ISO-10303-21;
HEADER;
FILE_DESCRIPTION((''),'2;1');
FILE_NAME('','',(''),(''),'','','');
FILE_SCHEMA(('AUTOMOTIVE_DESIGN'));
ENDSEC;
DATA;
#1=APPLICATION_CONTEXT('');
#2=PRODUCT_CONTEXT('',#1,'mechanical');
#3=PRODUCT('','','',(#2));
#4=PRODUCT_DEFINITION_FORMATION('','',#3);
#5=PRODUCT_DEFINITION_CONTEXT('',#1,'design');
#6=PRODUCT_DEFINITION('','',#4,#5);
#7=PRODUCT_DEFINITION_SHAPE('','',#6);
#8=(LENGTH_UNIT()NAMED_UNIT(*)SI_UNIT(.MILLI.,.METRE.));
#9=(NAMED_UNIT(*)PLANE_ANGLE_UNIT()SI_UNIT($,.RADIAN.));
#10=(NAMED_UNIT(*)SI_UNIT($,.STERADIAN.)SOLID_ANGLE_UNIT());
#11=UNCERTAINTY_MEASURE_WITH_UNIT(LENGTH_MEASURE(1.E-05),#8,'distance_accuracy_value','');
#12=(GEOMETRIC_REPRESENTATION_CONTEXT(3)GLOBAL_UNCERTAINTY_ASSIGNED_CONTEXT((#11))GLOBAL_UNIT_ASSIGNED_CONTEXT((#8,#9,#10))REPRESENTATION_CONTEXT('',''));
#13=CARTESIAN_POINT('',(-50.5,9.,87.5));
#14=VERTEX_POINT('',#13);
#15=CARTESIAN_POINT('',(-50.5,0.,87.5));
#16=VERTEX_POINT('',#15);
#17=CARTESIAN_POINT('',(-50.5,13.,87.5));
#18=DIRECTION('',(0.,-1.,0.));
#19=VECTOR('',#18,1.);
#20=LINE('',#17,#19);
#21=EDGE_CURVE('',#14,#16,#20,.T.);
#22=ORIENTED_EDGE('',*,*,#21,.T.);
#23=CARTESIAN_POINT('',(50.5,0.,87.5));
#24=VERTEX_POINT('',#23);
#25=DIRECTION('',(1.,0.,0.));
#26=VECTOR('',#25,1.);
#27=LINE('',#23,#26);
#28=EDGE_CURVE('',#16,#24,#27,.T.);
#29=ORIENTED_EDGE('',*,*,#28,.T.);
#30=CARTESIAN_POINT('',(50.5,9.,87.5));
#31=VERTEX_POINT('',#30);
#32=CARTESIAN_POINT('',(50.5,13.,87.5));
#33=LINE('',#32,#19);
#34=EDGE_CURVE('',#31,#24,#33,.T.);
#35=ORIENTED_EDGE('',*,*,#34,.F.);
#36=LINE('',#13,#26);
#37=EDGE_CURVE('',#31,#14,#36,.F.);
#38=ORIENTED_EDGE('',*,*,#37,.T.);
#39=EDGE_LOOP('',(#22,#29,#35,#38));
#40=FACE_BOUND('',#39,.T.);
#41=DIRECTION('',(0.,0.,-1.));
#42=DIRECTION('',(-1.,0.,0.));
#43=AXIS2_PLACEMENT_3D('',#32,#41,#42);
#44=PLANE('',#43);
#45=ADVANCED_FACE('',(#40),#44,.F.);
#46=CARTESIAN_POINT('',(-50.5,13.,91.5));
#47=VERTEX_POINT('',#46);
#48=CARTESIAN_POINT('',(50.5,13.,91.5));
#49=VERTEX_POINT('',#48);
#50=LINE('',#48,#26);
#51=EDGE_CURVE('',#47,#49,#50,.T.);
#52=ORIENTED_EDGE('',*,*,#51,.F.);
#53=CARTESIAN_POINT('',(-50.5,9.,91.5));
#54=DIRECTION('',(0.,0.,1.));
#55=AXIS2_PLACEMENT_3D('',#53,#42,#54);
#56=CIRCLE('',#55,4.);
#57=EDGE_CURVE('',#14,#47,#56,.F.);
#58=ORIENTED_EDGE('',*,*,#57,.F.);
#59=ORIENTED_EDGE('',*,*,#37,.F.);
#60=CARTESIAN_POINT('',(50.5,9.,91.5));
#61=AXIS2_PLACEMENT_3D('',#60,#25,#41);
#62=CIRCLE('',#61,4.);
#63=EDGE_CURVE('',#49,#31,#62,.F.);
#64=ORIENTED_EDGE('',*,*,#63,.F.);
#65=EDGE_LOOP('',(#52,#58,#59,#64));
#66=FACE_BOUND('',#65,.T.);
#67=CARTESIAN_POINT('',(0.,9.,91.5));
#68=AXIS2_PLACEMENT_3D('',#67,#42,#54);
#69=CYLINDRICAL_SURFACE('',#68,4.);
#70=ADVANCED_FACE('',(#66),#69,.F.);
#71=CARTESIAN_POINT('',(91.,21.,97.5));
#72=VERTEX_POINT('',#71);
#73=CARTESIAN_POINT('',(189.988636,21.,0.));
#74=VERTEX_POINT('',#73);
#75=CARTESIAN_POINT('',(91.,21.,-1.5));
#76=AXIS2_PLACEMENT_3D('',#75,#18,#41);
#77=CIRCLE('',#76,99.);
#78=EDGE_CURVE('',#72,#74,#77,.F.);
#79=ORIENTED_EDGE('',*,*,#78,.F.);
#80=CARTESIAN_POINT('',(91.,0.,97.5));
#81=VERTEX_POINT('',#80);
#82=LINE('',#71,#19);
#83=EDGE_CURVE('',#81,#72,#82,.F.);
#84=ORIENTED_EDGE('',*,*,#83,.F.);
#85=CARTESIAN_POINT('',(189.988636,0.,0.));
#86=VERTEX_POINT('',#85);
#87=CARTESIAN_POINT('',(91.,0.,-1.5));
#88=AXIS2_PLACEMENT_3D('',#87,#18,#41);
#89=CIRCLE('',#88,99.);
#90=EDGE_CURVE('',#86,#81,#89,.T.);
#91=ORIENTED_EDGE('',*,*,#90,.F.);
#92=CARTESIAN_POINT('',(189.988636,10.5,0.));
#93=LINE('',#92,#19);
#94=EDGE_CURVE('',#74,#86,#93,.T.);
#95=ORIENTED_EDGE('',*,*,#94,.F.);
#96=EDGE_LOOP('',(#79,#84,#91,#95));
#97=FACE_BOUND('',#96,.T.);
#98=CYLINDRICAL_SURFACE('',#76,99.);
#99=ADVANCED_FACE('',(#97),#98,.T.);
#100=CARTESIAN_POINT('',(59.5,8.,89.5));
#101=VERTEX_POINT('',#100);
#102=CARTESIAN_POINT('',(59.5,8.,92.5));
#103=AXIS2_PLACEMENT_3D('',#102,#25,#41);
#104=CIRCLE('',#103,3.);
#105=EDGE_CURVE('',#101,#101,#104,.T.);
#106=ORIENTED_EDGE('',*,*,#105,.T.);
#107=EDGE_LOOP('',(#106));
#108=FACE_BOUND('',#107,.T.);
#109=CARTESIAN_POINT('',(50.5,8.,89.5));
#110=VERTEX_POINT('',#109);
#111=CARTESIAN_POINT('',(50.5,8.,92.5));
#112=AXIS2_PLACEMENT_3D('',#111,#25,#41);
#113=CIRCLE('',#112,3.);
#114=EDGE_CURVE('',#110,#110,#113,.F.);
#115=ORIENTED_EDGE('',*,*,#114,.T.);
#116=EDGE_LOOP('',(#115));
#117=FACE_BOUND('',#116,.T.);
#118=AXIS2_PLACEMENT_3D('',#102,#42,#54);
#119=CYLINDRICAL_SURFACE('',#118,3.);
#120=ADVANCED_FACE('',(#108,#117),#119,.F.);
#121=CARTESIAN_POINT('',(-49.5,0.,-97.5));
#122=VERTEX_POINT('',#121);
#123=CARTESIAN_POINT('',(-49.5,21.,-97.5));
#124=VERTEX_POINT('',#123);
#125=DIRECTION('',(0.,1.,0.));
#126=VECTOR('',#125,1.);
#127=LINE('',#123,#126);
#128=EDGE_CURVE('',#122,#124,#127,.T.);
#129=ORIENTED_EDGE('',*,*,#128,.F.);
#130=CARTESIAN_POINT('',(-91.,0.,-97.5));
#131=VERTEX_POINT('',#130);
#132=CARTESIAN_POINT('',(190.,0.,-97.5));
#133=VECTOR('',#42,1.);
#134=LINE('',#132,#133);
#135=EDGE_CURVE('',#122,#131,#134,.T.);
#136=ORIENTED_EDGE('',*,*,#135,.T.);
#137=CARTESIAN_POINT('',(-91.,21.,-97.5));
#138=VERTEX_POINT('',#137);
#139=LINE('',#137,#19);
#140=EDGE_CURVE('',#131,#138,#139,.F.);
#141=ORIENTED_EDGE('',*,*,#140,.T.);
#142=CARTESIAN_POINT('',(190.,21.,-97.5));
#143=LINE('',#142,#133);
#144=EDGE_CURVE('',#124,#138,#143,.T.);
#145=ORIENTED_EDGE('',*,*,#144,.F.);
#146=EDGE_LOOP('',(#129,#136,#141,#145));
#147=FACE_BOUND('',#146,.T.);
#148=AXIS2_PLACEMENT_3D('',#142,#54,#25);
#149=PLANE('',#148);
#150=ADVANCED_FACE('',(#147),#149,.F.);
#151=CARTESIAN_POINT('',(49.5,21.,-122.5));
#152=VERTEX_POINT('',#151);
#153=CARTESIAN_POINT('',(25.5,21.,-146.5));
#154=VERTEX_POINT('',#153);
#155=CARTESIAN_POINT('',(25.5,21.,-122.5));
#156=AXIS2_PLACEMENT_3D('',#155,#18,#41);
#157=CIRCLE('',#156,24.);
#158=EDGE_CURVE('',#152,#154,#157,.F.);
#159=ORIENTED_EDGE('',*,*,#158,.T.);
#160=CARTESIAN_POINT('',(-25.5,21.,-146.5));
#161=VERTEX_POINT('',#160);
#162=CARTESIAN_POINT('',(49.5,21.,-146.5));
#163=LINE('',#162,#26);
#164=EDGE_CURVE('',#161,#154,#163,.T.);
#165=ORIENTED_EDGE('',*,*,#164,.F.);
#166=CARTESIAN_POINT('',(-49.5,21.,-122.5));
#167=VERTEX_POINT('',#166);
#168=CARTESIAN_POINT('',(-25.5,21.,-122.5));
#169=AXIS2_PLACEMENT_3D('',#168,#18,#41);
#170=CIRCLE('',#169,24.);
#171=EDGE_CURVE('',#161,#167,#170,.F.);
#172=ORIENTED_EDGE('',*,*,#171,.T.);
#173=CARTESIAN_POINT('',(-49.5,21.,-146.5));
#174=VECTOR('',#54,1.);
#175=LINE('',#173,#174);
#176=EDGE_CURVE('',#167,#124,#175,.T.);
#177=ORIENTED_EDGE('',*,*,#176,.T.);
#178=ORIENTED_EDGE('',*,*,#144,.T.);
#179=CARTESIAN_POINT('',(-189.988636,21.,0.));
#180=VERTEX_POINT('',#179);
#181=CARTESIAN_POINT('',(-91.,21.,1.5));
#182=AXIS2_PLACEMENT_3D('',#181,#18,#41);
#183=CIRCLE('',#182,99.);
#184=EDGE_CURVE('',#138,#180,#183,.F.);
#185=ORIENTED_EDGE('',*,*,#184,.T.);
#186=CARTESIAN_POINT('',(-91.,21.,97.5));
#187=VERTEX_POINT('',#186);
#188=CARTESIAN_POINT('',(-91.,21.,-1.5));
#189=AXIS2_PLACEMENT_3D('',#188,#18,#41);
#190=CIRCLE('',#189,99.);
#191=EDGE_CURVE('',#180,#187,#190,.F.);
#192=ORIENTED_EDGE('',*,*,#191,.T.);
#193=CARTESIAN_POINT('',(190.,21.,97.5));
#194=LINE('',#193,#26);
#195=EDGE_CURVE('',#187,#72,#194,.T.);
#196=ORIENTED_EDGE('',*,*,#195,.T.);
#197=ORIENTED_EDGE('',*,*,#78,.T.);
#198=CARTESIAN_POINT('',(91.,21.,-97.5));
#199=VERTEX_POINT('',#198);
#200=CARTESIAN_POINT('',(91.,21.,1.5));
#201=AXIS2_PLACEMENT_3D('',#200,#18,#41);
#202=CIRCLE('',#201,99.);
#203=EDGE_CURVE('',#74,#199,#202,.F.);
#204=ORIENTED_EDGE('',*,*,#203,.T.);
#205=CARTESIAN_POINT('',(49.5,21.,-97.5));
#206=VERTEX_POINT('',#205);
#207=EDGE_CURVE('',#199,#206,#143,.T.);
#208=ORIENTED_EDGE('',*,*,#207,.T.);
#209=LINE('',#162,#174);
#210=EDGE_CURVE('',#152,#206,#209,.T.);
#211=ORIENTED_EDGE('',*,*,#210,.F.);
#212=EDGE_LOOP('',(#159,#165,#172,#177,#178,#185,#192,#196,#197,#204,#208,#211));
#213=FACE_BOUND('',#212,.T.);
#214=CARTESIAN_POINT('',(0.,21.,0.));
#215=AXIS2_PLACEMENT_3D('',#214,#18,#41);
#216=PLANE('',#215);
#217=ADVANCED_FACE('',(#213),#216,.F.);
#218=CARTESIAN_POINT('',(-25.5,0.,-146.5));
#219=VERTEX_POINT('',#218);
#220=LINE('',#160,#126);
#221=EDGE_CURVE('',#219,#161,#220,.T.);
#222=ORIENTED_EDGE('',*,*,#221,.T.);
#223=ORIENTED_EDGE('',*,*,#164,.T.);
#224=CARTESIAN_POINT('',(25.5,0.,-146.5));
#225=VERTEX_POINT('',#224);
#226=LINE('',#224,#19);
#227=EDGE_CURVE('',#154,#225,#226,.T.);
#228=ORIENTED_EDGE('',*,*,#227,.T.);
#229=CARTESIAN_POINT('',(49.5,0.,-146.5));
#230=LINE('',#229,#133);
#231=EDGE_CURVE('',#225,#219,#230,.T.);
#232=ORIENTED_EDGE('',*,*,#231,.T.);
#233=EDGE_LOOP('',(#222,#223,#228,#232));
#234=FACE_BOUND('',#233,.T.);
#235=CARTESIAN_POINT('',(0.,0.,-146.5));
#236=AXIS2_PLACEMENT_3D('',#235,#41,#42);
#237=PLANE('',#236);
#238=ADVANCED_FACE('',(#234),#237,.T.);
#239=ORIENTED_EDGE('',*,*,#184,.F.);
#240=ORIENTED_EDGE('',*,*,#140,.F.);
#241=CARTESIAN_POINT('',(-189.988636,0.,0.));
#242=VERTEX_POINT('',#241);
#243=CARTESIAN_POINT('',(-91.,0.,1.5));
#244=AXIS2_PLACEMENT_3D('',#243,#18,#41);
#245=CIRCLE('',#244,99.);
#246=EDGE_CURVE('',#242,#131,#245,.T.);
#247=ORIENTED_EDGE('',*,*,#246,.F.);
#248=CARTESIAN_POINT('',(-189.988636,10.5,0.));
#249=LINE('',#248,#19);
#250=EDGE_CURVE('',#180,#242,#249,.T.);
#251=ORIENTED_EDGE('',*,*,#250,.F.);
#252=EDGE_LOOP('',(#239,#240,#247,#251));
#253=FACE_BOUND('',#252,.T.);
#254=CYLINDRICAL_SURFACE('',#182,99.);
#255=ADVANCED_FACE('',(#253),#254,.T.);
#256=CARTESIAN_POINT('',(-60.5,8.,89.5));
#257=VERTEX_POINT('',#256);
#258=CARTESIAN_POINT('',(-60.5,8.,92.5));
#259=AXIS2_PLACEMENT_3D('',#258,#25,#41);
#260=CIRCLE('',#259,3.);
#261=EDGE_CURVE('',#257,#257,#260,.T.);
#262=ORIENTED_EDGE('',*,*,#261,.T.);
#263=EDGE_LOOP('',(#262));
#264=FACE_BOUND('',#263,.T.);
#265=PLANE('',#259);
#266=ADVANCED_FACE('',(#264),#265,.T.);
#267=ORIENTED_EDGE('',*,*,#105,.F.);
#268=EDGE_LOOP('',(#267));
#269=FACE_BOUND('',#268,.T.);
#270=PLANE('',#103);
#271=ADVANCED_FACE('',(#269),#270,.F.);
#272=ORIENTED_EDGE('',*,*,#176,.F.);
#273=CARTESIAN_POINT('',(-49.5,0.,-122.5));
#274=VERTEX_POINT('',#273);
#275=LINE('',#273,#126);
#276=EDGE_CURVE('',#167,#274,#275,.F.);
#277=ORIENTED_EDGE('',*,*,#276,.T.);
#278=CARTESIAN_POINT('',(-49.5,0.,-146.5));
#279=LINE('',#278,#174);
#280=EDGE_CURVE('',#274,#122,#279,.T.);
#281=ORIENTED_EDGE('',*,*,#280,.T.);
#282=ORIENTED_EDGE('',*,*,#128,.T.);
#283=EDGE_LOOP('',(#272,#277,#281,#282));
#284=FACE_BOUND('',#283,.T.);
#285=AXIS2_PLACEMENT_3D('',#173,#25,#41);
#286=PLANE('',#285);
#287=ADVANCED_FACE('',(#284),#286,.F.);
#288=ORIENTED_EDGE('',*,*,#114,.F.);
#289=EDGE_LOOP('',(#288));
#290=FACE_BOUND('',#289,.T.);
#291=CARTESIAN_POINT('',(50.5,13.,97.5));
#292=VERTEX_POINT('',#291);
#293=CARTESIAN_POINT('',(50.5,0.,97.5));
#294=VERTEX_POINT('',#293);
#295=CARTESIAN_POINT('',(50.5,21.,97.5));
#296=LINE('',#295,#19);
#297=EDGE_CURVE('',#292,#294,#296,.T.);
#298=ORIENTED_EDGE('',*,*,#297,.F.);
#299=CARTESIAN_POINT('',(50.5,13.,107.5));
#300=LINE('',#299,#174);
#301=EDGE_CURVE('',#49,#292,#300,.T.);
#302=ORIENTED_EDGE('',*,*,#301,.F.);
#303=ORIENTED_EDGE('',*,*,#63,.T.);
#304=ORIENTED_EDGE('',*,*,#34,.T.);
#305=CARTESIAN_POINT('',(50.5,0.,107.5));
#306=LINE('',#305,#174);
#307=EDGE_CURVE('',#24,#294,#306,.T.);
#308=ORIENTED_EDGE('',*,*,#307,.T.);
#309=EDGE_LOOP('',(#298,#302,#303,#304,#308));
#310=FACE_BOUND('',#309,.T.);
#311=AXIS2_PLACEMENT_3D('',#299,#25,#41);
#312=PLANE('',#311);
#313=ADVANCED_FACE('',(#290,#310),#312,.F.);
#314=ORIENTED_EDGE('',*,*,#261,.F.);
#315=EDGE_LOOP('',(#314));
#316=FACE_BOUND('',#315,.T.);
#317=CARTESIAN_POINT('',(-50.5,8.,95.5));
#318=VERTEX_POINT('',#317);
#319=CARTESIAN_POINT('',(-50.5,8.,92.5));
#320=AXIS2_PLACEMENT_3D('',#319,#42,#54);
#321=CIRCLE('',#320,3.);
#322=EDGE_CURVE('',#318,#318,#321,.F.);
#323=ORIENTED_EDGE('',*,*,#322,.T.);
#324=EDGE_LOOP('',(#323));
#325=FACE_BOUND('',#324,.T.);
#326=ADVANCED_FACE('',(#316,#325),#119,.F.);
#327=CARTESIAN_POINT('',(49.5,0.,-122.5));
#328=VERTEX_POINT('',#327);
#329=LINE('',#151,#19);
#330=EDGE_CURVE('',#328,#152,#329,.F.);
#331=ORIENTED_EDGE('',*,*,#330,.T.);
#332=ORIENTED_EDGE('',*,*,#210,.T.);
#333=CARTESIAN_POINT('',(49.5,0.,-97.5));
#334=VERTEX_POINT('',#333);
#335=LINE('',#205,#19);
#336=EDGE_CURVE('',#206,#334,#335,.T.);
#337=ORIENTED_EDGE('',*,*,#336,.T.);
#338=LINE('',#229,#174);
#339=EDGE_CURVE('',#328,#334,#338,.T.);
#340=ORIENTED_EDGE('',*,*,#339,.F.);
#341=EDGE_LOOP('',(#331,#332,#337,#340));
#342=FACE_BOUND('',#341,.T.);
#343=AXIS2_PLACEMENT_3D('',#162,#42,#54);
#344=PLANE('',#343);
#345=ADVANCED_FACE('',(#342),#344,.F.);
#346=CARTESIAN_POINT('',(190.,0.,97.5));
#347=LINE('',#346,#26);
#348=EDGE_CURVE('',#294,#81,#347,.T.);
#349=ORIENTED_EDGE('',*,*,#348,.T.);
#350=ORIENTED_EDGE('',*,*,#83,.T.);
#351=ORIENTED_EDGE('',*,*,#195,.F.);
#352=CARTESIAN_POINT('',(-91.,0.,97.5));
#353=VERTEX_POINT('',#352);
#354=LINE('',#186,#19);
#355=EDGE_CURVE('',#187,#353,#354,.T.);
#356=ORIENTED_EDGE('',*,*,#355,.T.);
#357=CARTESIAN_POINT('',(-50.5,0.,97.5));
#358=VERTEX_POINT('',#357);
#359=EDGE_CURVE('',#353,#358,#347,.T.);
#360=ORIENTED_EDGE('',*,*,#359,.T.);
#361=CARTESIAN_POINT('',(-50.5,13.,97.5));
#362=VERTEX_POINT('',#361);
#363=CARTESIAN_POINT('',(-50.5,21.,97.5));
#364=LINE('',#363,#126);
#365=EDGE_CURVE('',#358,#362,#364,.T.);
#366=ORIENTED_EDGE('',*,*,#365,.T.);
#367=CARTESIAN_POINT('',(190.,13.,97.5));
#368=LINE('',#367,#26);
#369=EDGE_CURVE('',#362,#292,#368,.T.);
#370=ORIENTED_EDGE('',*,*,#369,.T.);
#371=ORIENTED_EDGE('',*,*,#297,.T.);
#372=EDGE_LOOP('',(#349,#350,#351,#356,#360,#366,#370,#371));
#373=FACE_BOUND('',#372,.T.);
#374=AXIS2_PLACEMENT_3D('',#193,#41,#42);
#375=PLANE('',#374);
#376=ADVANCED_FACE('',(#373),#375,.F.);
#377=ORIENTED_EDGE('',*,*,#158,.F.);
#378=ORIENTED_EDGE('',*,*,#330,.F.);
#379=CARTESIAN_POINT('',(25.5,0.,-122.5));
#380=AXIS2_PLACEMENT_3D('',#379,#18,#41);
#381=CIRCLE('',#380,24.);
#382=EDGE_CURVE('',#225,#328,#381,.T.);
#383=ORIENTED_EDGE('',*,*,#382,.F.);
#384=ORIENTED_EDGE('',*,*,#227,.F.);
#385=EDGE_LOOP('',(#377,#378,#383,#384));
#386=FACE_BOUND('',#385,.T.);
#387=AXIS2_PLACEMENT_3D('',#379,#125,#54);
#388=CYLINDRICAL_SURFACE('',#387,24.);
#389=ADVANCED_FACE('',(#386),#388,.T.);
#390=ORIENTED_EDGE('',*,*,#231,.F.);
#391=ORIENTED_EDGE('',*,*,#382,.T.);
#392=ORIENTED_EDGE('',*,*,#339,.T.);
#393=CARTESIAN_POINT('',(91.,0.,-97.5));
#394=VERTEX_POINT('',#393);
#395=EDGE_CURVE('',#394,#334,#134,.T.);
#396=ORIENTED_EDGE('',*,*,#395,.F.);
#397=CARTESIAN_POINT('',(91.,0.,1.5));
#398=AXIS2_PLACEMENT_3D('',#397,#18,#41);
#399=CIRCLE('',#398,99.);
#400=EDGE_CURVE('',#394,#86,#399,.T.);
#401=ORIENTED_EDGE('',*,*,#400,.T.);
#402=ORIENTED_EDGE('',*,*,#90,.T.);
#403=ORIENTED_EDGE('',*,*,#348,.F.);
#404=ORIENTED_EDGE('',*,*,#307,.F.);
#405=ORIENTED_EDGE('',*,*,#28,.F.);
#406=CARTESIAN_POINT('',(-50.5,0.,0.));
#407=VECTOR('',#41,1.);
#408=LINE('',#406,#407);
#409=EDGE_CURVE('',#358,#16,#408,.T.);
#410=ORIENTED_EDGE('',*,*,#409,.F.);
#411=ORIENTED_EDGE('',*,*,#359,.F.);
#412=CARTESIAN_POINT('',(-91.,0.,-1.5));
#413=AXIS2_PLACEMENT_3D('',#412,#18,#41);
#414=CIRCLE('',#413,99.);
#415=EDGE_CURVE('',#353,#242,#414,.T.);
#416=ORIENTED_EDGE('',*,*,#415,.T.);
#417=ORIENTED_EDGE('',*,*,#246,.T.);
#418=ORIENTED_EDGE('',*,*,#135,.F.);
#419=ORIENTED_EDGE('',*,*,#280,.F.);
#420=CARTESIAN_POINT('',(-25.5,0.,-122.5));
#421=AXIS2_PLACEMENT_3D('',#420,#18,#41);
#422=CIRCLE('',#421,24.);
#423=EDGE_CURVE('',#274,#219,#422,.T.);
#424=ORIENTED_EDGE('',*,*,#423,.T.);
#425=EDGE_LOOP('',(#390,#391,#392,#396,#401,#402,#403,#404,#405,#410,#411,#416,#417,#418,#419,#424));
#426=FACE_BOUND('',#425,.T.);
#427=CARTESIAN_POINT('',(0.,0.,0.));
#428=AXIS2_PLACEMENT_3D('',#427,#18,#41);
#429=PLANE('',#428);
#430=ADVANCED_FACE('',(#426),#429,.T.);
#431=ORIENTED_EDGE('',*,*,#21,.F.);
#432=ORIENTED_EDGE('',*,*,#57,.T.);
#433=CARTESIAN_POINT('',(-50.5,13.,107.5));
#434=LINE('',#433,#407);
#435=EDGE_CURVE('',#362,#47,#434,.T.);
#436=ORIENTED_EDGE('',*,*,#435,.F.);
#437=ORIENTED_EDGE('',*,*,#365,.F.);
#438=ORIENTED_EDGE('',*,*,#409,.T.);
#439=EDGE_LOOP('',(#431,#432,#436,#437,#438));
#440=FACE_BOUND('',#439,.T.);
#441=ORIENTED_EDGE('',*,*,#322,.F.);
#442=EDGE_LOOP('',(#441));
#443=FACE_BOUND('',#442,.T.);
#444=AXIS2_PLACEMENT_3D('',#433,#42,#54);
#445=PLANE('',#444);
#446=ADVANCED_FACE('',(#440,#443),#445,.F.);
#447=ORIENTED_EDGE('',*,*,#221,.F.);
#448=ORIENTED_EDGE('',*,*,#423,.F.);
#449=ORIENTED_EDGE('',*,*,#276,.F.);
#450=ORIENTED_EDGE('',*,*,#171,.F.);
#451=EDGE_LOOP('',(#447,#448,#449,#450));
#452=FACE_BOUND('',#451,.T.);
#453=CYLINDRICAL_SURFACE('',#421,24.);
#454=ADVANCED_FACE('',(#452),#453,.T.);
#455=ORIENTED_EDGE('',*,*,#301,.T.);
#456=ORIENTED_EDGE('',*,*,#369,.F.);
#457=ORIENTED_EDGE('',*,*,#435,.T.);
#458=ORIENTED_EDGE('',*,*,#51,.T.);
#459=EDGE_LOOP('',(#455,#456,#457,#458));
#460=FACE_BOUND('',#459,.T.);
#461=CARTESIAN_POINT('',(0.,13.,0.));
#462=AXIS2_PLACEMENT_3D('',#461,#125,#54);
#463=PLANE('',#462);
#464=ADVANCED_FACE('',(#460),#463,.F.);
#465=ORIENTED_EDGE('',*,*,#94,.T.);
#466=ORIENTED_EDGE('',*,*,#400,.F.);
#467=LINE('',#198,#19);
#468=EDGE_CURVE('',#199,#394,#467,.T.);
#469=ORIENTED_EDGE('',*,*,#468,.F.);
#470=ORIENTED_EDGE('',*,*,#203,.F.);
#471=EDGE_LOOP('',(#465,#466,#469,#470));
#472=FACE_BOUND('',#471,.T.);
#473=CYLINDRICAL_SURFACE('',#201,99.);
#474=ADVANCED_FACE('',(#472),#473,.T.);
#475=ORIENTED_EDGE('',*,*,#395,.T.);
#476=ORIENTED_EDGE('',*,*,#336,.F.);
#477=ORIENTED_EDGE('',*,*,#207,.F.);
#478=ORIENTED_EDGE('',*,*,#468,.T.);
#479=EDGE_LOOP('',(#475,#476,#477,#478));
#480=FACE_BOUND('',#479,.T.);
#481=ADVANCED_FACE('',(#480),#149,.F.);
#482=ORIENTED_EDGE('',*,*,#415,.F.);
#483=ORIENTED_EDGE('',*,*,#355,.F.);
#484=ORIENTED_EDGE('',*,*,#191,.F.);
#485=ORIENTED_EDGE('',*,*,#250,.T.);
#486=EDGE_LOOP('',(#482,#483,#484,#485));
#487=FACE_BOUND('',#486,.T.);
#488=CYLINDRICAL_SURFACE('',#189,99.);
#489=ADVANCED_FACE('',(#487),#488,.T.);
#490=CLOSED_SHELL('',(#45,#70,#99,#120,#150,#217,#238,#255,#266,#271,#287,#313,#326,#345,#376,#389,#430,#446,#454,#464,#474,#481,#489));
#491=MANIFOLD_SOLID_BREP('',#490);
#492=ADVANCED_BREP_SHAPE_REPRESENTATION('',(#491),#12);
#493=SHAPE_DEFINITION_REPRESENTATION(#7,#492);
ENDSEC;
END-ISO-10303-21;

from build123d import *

# Parameters (mm, degrees)
SKETCH1_W               = 380
SKETCH1_H               = 195
BOSS_EXTRUDE1_DEPTH     = 21
FILLET1_R               = 99
SKETCH2_W               = 101
SKETCH2_H               = 20
CUT_EXTRUDE1_DEPTH      = 13
FILLET2_R               = 4
CUT_EXTRUDE2_DEPTH      = 110
CUT_EXTRUDE2_DEPTH_BACK = 10
SKETCH3_R               = 3
SKETCH4_W               = 99
SKETCH4_H               = 21
BOSS_EXTRUDE2_DEPTH     = 49
FILLET3_R               = 24


with BuildPart() as part:
    # Sketch1 → Boss-Extrude1 (new body)
    with BuildSketch(Plane(origin=(0, 0, 0), x_dir=(1, 0, 0), z_dir=(0, 1, 0))):
        Rectangle(SKETCH1_W, SKETCH1_H)
    extrude(amount=BOSS_EXTRUDE1_DEPTH)

    # Fillet1
    # the kernel refuses this fillet: 99 mm, written as the material it takes off along each edge
    with BuildSketch(Plane(origin=(-190, -247.5, 97.5), x_dir=(0, 0, -1), z_dir=(0, 1, 0)), Plane(origin=(-190, -247.5, -97.5), x_dir=(1, 0, 0), z_dir=(0, 1, 0)), Plane(origin=(190, -247.5, 97.5), x_dir=(-1, 0, 0), z_dir=(0, 1, 0))) as fillet1_piece_1:
        with BuildLine():
            CenterArc((FILLET1_R, -FILLET1_R), FILLET1_R, 90, 90)
            Line((0, -FILLET1_R), (0, 0))
            Line((0, 0), (FILLET1_R, 0))
        make_face()
    extrude(amount=516, mode=Mode.SUBTRACT)
    with BuildSketch(Plane(origin=(190, -247.5, -97.5), x_dir=(-1, 0, 0), z_dir=(0, 1, 0))) as fillet1_piece_2:
        with BuildLine():
            CenterArc((FILLET1_R, FILLET1_R), FILLET1_R, 180, 90)
            Line((0, FILLET1_R), (0, 0))
            Line((0, 0), (FILLET1_R, 0))
        make_face()
    extrude(amount=516, mode=Mode.SUBTRACT)

    # Sketch2 → Cut-Extrude1 (cut)
    with BuildSketch(Plane.XZ):
        with Locations((0, 97.5)):
            Rectangle(SKETCH2_W, SKETCH2_H)
    extrude(amount=-CUT_EXTRUDE1_DEPTH, mode=Mode.SUBTRACT)

    # Fillet2
    fillet2_edges = [part.edges().sort_by_distance(p)[0] for p in [
        (0, 13, 87.5),
    ]]
    fillet(fillet2_edges, radius=FILLET2_R)

    # Sketch3 → Cut-Extrude2 (cut, two sides: drawn at the far end of the back side and taken through both)
    with BuildSketch(Plane(origin=(-50.5, 0, 0), x_dir=(0, 0, -1), z_dir=(1, 0, 0)).offset(-CUT_EXTRUDE2_DEPTH_BACK)):
        with Locations((-92.5, 8)):
            Circle(SKETCH3_R)
    extrude(amount=CUT_EXTRUDE2_DEPTH + CUT_EXTRUDE2_DEPTH_BACK, mode=Mode.SUBTRACT)

    # Sketch4 → Boss-Extrude2 (add)
    with BuildSketch(Plane(origin=(0, 0, -97.5), x_dir=(-1, 0, 0), z_dir=(0, 0, -1))):
        with Locations((0, 10.5)):
            Rectangle(SKETCH4_W, SKETCH4_H)
    extrude(amount=BOSS_EXTRUDE2_DEPTH)

    # Fillet3
    fillet3_edges = [part.edges().sort_by_distance(p)[0] for p in [
        (49.5, 10.5, -146.5),
        (-49.5, 10.5, -146.5),
    ]]
    fillet(fillet3_edges, radius=FILLET3_R)


solid = part.part
